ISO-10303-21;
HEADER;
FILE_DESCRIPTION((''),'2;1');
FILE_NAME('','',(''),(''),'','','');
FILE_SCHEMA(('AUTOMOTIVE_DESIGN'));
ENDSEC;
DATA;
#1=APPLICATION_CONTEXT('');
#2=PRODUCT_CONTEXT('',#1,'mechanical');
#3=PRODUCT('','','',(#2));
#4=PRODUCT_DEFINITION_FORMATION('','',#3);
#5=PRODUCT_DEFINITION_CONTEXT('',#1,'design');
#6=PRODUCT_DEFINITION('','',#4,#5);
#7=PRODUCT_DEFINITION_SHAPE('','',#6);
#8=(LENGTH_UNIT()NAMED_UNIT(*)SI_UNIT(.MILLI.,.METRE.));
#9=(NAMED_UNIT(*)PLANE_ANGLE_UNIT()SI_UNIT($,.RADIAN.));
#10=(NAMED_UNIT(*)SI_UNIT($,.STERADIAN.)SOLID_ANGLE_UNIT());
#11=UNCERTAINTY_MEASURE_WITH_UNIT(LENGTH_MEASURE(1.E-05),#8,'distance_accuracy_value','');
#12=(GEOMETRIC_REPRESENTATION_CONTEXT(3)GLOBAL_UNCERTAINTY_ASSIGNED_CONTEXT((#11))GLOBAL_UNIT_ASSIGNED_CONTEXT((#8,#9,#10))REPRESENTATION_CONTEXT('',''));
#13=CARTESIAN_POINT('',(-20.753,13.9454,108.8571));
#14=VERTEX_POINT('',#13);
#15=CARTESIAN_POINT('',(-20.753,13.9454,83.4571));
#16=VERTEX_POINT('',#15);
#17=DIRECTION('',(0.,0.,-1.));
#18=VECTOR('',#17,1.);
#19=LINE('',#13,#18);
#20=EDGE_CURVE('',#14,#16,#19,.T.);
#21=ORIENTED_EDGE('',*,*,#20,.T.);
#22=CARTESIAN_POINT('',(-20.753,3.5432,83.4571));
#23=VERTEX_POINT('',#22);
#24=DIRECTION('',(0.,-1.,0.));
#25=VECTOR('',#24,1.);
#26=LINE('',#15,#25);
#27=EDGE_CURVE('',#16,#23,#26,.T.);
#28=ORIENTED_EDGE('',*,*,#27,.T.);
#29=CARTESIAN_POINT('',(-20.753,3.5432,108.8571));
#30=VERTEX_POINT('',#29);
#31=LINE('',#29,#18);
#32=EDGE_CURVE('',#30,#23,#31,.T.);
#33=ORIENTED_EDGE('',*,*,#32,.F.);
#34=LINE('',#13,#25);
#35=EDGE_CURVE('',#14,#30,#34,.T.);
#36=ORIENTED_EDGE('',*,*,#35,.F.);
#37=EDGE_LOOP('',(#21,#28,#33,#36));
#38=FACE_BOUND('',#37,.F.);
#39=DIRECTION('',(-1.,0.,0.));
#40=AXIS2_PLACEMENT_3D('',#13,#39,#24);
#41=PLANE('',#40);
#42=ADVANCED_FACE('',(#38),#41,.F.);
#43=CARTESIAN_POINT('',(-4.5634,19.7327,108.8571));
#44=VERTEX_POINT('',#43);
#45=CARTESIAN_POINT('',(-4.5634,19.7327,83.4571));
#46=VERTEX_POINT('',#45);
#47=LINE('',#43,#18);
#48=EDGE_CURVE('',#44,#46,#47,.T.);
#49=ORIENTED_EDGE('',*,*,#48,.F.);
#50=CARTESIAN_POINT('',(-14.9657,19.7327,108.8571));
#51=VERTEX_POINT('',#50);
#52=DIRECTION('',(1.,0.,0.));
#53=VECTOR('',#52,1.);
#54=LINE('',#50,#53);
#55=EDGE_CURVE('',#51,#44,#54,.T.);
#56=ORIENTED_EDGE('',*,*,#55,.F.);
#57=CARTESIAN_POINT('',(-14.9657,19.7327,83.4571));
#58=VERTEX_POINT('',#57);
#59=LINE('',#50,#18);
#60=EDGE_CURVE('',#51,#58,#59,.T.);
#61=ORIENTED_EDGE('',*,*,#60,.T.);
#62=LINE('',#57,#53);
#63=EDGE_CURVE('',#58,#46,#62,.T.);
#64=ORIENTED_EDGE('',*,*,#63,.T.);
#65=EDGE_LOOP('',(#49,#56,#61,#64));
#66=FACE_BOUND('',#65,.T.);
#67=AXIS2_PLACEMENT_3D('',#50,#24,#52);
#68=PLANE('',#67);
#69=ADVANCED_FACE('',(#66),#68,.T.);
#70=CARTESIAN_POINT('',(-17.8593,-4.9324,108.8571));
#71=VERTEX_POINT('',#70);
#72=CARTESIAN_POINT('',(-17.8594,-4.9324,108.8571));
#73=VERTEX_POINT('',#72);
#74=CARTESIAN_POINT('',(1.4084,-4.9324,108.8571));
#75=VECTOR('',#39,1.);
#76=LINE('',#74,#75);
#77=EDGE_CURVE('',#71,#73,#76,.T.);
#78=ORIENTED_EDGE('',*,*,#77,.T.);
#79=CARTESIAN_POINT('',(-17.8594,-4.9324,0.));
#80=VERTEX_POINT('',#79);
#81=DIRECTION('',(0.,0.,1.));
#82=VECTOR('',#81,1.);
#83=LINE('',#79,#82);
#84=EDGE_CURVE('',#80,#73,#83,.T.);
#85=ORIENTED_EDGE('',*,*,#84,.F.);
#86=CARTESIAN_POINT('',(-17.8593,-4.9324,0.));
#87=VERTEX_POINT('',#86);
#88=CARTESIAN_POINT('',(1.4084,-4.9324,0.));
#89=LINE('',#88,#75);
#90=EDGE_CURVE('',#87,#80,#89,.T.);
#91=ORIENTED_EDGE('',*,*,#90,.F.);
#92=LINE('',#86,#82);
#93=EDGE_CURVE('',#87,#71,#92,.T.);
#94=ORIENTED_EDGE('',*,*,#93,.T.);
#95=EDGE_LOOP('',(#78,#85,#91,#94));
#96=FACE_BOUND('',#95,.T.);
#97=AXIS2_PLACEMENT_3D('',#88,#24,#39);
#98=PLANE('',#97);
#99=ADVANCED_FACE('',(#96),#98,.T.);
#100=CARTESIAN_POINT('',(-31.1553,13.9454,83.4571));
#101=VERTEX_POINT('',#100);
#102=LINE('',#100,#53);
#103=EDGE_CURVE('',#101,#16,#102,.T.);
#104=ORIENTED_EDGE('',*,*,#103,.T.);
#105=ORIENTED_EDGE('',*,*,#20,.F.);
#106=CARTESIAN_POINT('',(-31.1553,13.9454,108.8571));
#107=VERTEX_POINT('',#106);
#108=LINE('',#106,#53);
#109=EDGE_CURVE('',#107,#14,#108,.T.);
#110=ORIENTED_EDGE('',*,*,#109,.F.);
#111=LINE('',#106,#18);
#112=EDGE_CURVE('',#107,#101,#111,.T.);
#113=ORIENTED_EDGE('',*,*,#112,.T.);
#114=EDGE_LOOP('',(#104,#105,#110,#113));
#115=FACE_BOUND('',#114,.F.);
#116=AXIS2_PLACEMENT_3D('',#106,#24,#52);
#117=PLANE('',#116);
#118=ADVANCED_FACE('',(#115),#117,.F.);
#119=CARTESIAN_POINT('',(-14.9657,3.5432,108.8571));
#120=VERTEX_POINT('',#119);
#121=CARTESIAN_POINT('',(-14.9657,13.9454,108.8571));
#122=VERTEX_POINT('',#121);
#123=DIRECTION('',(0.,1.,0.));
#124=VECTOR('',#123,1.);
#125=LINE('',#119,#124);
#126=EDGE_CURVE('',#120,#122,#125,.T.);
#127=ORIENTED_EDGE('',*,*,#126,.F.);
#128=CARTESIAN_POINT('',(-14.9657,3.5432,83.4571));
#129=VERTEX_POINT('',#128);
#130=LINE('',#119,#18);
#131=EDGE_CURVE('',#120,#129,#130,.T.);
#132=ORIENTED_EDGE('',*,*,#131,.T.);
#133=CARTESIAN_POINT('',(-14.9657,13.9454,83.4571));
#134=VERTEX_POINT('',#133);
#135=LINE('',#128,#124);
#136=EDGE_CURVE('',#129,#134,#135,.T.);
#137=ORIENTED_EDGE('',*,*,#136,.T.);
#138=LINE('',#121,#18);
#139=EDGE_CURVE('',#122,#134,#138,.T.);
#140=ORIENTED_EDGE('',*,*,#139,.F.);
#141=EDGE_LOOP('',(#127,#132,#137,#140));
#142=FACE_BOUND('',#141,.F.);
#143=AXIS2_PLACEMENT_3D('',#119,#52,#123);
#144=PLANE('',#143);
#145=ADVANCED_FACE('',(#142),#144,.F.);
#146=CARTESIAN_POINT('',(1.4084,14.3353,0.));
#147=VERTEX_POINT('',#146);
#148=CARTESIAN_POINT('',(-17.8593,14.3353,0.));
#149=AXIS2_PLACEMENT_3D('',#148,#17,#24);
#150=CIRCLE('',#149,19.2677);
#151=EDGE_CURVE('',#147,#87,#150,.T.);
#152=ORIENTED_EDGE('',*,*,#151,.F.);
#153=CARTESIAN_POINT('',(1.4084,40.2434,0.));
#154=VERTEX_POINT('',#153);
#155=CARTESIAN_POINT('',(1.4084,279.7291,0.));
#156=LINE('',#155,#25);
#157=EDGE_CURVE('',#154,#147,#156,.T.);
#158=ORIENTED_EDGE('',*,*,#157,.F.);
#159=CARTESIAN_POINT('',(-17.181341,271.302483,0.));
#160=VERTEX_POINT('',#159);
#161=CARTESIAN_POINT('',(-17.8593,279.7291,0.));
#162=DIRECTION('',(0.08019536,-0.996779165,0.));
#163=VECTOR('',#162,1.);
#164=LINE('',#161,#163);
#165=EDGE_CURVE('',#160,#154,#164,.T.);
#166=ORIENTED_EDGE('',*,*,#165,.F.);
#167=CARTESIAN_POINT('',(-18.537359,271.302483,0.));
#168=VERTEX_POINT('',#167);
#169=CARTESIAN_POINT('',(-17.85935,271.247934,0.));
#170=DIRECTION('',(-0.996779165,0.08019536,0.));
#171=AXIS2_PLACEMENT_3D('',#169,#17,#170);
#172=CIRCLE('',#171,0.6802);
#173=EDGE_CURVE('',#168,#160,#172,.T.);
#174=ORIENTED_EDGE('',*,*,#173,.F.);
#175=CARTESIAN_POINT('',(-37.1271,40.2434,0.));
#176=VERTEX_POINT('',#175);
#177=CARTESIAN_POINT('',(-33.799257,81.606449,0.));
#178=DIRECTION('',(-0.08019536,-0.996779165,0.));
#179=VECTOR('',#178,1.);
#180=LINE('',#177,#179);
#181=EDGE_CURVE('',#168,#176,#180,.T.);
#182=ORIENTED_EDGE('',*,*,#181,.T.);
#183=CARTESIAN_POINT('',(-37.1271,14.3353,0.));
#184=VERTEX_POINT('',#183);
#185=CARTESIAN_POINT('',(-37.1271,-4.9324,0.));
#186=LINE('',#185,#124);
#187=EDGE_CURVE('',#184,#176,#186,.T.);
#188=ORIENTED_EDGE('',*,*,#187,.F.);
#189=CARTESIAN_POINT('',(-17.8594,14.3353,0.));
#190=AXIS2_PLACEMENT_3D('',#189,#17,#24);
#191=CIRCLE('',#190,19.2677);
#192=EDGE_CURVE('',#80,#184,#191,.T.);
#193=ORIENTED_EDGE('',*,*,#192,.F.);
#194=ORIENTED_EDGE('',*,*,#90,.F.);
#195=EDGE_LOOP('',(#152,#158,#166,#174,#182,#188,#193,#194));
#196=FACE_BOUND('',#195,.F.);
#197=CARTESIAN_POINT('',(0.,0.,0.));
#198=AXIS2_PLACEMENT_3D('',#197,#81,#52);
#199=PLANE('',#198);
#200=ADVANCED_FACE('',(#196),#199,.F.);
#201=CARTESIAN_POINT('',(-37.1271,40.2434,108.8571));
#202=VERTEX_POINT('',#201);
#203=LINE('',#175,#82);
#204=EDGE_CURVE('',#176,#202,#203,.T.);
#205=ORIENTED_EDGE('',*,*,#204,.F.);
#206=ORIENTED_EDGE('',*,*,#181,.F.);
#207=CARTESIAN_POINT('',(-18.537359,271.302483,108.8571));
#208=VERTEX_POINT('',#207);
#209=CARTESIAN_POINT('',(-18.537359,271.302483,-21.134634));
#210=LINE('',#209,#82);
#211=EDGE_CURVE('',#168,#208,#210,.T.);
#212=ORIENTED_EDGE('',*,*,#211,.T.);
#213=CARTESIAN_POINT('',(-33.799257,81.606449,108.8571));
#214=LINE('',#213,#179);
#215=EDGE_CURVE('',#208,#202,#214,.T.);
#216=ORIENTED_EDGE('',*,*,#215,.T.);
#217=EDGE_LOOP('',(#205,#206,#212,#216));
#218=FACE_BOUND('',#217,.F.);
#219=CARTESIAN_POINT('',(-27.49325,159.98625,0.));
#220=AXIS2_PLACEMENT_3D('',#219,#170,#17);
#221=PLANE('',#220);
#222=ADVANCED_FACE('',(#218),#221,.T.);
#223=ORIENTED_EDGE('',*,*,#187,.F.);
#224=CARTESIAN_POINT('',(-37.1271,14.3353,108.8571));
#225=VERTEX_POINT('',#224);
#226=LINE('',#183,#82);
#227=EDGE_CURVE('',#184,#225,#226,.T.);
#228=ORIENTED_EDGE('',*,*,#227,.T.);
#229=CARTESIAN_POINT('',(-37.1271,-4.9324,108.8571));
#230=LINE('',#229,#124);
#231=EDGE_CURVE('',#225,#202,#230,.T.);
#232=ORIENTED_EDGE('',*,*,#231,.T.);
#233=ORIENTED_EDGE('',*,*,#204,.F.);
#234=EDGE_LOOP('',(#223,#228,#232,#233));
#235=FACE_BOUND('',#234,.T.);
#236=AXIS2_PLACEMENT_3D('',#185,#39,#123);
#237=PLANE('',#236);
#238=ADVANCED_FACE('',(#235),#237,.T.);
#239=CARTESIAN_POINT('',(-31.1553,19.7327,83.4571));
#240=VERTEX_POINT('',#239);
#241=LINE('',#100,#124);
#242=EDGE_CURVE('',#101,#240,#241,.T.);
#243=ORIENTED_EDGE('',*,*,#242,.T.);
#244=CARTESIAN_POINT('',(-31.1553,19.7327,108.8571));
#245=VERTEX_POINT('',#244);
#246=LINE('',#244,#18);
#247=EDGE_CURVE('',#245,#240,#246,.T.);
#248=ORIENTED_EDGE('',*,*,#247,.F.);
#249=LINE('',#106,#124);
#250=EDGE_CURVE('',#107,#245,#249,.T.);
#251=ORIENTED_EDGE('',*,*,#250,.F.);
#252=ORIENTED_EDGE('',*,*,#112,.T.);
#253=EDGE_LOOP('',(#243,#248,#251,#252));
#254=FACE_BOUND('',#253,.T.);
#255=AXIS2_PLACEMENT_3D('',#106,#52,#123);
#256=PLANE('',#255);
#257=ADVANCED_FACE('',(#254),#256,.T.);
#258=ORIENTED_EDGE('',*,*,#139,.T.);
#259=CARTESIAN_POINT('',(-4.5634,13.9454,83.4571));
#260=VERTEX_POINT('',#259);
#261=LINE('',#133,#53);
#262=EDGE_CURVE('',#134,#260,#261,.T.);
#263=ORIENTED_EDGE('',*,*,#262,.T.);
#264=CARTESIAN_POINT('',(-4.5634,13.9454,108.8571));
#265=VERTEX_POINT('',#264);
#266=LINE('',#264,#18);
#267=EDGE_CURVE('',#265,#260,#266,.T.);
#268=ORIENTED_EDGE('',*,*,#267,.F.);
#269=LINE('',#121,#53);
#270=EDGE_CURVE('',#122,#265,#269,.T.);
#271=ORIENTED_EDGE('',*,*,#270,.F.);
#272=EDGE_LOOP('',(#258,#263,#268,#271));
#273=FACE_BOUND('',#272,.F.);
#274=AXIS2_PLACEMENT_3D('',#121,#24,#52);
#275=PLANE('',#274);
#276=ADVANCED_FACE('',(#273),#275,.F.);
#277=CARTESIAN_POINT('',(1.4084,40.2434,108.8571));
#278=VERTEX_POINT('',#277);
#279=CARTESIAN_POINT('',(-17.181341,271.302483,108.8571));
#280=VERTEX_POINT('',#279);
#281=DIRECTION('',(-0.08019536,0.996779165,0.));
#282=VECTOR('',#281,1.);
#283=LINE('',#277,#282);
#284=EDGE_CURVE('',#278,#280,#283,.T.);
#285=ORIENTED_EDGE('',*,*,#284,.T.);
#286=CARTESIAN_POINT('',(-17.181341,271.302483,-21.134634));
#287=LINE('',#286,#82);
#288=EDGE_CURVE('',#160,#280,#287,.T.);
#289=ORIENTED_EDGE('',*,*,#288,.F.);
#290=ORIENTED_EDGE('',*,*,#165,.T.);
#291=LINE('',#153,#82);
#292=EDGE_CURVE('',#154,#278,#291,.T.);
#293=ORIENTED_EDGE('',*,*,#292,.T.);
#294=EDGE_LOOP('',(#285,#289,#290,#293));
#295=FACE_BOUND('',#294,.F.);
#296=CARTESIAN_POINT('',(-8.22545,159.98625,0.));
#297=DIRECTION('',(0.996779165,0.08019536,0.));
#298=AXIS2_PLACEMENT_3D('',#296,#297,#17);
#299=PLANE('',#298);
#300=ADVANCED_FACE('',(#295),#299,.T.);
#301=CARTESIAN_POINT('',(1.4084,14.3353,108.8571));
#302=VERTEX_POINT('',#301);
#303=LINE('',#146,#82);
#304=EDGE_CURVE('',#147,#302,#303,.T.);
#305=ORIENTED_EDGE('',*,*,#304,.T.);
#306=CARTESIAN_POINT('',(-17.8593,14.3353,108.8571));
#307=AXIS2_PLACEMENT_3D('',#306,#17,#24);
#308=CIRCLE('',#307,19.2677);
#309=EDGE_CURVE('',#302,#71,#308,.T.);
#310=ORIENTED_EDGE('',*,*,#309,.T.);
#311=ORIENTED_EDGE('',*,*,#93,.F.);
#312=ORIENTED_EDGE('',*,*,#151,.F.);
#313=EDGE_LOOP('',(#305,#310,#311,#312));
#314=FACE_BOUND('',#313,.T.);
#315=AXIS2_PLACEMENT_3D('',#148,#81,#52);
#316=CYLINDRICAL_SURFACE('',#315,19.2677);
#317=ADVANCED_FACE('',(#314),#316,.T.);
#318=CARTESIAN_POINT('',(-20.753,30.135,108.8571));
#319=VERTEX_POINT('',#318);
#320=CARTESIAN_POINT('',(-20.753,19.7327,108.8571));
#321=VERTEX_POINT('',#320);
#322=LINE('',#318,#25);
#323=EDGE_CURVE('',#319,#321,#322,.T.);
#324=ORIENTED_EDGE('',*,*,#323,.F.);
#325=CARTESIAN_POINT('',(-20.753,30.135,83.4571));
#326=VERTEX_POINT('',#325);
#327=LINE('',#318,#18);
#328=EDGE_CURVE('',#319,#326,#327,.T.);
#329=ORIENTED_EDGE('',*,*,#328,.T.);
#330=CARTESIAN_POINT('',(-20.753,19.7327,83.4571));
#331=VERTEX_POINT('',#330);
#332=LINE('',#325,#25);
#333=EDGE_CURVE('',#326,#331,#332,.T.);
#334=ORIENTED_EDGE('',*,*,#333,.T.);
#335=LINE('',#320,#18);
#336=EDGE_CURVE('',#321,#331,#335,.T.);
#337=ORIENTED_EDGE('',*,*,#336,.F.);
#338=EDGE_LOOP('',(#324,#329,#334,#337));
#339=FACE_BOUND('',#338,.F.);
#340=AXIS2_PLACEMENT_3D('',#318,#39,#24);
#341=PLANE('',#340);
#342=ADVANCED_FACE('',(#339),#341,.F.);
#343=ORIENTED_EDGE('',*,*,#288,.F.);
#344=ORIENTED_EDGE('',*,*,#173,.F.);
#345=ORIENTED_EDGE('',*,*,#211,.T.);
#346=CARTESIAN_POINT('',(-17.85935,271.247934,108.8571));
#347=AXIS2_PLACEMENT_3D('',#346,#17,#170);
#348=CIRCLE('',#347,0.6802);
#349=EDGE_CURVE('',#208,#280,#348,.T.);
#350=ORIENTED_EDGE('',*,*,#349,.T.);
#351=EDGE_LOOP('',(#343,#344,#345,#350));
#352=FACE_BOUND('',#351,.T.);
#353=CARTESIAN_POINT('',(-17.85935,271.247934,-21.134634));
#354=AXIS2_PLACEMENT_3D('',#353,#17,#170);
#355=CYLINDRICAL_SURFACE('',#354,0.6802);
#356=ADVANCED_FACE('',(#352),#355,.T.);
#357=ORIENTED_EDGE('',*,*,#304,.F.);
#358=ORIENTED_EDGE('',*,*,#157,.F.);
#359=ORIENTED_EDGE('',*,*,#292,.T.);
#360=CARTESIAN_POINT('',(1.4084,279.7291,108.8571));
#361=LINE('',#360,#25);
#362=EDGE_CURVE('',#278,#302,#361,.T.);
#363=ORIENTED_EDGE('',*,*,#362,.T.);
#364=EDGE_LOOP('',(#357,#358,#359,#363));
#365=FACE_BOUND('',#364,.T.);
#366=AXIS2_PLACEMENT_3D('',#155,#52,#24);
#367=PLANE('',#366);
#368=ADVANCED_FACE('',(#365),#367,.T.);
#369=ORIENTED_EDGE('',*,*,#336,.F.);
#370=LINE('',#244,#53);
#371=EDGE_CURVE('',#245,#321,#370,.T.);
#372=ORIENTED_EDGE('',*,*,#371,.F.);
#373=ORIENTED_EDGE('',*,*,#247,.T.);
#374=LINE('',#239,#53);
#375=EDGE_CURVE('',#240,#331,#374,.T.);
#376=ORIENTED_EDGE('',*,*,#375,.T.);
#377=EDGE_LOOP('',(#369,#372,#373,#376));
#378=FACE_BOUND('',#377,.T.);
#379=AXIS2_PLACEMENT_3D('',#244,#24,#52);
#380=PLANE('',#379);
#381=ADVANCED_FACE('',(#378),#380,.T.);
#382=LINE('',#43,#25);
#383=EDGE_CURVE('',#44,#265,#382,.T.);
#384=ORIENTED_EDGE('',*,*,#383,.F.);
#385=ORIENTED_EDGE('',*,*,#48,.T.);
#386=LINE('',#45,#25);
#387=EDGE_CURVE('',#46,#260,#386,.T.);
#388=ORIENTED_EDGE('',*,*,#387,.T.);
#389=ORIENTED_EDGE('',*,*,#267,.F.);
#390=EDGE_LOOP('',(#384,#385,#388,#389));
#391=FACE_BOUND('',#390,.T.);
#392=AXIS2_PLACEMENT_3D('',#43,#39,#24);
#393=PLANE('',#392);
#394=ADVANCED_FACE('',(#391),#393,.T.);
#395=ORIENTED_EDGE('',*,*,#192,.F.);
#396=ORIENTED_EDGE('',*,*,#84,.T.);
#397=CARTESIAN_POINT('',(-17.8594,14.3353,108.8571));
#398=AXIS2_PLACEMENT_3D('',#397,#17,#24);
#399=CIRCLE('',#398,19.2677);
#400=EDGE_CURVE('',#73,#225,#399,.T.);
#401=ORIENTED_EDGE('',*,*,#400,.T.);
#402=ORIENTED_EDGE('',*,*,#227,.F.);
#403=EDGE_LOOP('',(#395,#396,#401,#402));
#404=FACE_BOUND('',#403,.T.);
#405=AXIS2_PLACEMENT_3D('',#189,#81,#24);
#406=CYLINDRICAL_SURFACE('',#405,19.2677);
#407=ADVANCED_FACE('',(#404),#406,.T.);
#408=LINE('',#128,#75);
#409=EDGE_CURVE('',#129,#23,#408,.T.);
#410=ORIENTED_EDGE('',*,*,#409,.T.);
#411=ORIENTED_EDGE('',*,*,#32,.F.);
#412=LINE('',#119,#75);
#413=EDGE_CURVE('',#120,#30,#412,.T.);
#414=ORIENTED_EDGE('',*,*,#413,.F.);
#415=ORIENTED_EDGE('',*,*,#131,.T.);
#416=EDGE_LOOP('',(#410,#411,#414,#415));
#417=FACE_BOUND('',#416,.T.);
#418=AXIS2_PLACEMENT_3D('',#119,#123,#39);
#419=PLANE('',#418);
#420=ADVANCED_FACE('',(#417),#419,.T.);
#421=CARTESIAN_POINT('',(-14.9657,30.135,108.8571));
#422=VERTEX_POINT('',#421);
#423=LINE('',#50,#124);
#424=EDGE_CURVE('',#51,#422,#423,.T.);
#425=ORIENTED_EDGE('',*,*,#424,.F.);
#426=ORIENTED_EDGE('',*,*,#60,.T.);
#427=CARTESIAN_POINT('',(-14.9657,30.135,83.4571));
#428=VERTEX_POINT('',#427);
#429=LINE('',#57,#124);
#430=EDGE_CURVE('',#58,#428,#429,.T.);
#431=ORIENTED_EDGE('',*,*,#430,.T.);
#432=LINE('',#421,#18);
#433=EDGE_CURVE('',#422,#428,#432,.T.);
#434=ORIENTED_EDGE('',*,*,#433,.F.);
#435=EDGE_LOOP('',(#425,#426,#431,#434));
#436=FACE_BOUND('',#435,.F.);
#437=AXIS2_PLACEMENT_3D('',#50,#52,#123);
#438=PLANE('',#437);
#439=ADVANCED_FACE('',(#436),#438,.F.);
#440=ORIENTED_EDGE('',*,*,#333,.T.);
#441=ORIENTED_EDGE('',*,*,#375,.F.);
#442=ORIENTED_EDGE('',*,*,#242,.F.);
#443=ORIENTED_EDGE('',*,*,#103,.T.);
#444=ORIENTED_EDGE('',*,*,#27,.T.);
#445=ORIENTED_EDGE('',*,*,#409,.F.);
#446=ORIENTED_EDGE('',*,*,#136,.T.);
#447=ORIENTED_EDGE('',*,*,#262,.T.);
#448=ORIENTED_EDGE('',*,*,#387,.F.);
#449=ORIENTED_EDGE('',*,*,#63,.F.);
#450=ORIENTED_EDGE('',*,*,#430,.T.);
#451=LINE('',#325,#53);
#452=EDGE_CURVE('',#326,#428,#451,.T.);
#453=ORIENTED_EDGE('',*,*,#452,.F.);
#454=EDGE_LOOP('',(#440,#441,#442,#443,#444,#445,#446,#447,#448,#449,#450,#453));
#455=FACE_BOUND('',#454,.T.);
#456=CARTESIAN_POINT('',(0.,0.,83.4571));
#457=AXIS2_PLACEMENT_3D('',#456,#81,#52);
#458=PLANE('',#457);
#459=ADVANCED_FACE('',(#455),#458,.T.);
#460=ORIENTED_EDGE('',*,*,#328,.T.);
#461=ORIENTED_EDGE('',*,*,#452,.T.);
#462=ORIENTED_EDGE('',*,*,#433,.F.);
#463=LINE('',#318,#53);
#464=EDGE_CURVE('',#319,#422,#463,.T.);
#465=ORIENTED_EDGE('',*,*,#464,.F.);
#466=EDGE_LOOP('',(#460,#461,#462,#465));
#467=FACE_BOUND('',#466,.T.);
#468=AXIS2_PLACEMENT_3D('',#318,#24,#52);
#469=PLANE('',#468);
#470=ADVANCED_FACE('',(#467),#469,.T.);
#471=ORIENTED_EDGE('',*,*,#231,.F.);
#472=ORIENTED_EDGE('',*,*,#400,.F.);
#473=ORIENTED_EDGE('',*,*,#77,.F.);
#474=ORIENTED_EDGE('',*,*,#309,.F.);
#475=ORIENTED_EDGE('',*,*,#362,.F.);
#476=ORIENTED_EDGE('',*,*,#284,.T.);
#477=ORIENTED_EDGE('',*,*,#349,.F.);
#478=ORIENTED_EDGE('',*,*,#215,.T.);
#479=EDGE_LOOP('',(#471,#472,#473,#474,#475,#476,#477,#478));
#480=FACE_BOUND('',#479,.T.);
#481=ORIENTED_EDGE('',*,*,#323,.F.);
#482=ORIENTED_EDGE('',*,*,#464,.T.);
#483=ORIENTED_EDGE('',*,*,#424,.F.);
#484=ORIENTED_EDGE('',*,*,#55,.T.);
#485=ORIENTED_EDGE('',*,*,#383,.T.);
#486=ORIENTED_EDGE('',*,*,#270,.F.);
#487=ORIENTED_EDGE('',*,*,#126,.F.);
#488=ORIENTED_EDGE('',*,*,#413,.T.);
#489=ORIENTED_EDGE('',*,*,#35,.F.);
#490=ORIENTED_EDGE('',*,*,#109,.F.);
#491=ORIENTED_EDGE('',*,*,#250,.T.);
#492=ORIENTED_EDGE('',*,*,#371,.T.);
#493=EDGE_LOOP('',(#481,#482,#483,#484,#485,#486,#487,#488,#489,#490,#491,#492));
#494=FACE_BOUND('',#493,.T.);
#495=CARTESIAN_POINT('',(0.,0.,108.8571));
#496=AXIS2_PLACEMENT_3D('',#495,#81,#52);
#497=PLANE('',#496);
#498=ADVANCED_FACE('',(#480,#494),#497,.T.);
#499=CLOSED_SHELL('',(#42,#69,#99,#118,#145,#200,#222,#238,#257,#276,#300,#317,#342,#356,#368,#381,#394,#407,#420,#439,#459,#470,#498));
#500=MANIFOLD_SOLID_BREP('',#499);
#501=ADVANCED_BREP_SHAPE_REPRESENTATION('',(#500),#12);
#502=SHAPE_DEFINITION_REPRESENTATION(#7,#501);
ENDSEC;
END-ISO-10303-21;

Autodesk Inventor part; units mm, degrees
ref_plane "YZ Plane" through (0, 0, 0) normal (1, 0, 0) x (0, 1, 0)
ref_plane "XZ Plane" through (0, 0, 0) normal (0, 1, 0) x (-1, 0, 0)
ref_plane "XY Plane" through (0, 0, 0) normal (0, 0, 1) x (1, 0, 0)
sketch "Sketch1" plane through (0, 0, 0) normal (0, 0, 1) x (1, 0, 0)
  line L0 (-37.1271, 279.7291) -> (1.4084, 279.7291)
  line L1 (1.4084, 279.7291) -> (1.4084, -4.9324)
  line L2 (1.4084, -4.9324) -> (-37.1271, -4.9324)
  line L3 (-37.1271, -4.9324) -> (-37.1271, 279.7291)
  point P0 (0, 0)
  dimension "d0" = 38.5354
  dimension "d1" = 284.6614
extrude "Extrusion1" add sketch "Sketch1" along normal blind 108.8571
sketch "Sketch2" plane through (0, 0, 108.8571) normal (0, 0, 1) x (1, 0, 0)
  line L0 (-37.1271, -4.9324) -> (1.4084, -4.9324) projected
  line L1 (-17.8594, -4.9324) -> (-17.8594, 16.8391) construction
  circle A0 centre (-17.8594, 16.8391) radius 13.6071 construction
  line L2 (-17.8594, 16.8391) -> (-20.753, 30.135) construction
  line L3 (-17.8594, 16.8391) -> (-14.9657, 30.135) construction
  line L4 (-20.753, 30.135) -> (-14.9657, 30.135)
  line L5 (-17.8594, 16.8391) -> (-31.1553, 13.9454) construction
  line L6 (-31.1553, 13.9454) -> (-31.1553, 19.7327)
  line L7 (-17.8594, 16.8391) -> (-14.9657, 3.5432) construction
  line L8 (-14.9657, 3.5432) -> (-20.753, 3.5432)
  line L9 (-17.8594, 16.8391) -> (-4.5634, 19.7327) construction
  line L10 (-4.5634, 19.7327) -> (-4.5634, 13.9454)
  line L11 (-20.753, 30.135) -> (-20.753, 19.7327)
  line L12 (-20.753, 13.9454) -> (-20.753, 3.5432)
  line L13 (-31.1553, 13.9454) -> (-20.753, 13.9454)
  line L14 (-14.9657, 13.9454) -> (-4.5634, 13.9454)
  line L15 (-14.9657, 3.5432) -> (-14.9657, 13.9454)
  line L16 (-14.9657, 19.7327) -> (-14.9657, 30.135)
  line L17 (-14.9657, 19.7327) -> (-4.5634, 19.7327)
  line L18 (-31.1553, 19.7327) -> (-20.753, 19.7327)
  point P0 (0, 0)
  dimension "d4" = 21.7714
  dimension "d5" = 27.2143
  dimension "d18" = 360
fillet "Fillet1" radius 19.2677 2 edges at (1.4084, -4.9324, 54.4286) (-37.1271, -4.9324, 54.4286)
chamfer "Chamfer1" distance 19.2677 distance2 239.4857 1 edges at (-37.1271, 279.7291, 54.4286) measured on face at (-11.4368, 279.7291, 36.2857)
chamfer "Chamfer2" distance 239.4857 distance2 19.2677 1 edges at (1.4084, 279.7291, 54.4286) measured on face at (1.4084, 102.7999, 36.2857)
sketch "Sketch3" plane through (0, 0, 108.8571) normal (0, 0, 1) x (1, 0, 0)
  point P0 (0, 0)
extrude "Extrusion3" cut sketch "Sketch2" against normal blind 25.4
sketch "Sketch4" plane through (0, 0, 108.8571) normal (0, 0, 1) x (1, 0, 0)
  line L0 (-31.1553, 19.7327) -> (-31.1553, 13.9454) projected
  line L1 (-31.1553, 13.9454) -> (-31.1553, 19.7327) projected
  line L2 (-31.1553, 16.8391) -> (-13.0927, 16.8391) construction
  line L3 (-4.5634, 19.7327) -> (-14.9657, 19.7327) projected
  circle A0 centre (-17.8594, 16.8391) radius 4.0922
  point P0 (0, 0)
fillet "Fillet3" radius 0.6802 2 edges at (-17.8593, 279.7291, 54.4286) (-17.8594, 279.7291, 54.4286)
properties part number "Bistable Flipper 2" material "Stainless Steel, Polished"
